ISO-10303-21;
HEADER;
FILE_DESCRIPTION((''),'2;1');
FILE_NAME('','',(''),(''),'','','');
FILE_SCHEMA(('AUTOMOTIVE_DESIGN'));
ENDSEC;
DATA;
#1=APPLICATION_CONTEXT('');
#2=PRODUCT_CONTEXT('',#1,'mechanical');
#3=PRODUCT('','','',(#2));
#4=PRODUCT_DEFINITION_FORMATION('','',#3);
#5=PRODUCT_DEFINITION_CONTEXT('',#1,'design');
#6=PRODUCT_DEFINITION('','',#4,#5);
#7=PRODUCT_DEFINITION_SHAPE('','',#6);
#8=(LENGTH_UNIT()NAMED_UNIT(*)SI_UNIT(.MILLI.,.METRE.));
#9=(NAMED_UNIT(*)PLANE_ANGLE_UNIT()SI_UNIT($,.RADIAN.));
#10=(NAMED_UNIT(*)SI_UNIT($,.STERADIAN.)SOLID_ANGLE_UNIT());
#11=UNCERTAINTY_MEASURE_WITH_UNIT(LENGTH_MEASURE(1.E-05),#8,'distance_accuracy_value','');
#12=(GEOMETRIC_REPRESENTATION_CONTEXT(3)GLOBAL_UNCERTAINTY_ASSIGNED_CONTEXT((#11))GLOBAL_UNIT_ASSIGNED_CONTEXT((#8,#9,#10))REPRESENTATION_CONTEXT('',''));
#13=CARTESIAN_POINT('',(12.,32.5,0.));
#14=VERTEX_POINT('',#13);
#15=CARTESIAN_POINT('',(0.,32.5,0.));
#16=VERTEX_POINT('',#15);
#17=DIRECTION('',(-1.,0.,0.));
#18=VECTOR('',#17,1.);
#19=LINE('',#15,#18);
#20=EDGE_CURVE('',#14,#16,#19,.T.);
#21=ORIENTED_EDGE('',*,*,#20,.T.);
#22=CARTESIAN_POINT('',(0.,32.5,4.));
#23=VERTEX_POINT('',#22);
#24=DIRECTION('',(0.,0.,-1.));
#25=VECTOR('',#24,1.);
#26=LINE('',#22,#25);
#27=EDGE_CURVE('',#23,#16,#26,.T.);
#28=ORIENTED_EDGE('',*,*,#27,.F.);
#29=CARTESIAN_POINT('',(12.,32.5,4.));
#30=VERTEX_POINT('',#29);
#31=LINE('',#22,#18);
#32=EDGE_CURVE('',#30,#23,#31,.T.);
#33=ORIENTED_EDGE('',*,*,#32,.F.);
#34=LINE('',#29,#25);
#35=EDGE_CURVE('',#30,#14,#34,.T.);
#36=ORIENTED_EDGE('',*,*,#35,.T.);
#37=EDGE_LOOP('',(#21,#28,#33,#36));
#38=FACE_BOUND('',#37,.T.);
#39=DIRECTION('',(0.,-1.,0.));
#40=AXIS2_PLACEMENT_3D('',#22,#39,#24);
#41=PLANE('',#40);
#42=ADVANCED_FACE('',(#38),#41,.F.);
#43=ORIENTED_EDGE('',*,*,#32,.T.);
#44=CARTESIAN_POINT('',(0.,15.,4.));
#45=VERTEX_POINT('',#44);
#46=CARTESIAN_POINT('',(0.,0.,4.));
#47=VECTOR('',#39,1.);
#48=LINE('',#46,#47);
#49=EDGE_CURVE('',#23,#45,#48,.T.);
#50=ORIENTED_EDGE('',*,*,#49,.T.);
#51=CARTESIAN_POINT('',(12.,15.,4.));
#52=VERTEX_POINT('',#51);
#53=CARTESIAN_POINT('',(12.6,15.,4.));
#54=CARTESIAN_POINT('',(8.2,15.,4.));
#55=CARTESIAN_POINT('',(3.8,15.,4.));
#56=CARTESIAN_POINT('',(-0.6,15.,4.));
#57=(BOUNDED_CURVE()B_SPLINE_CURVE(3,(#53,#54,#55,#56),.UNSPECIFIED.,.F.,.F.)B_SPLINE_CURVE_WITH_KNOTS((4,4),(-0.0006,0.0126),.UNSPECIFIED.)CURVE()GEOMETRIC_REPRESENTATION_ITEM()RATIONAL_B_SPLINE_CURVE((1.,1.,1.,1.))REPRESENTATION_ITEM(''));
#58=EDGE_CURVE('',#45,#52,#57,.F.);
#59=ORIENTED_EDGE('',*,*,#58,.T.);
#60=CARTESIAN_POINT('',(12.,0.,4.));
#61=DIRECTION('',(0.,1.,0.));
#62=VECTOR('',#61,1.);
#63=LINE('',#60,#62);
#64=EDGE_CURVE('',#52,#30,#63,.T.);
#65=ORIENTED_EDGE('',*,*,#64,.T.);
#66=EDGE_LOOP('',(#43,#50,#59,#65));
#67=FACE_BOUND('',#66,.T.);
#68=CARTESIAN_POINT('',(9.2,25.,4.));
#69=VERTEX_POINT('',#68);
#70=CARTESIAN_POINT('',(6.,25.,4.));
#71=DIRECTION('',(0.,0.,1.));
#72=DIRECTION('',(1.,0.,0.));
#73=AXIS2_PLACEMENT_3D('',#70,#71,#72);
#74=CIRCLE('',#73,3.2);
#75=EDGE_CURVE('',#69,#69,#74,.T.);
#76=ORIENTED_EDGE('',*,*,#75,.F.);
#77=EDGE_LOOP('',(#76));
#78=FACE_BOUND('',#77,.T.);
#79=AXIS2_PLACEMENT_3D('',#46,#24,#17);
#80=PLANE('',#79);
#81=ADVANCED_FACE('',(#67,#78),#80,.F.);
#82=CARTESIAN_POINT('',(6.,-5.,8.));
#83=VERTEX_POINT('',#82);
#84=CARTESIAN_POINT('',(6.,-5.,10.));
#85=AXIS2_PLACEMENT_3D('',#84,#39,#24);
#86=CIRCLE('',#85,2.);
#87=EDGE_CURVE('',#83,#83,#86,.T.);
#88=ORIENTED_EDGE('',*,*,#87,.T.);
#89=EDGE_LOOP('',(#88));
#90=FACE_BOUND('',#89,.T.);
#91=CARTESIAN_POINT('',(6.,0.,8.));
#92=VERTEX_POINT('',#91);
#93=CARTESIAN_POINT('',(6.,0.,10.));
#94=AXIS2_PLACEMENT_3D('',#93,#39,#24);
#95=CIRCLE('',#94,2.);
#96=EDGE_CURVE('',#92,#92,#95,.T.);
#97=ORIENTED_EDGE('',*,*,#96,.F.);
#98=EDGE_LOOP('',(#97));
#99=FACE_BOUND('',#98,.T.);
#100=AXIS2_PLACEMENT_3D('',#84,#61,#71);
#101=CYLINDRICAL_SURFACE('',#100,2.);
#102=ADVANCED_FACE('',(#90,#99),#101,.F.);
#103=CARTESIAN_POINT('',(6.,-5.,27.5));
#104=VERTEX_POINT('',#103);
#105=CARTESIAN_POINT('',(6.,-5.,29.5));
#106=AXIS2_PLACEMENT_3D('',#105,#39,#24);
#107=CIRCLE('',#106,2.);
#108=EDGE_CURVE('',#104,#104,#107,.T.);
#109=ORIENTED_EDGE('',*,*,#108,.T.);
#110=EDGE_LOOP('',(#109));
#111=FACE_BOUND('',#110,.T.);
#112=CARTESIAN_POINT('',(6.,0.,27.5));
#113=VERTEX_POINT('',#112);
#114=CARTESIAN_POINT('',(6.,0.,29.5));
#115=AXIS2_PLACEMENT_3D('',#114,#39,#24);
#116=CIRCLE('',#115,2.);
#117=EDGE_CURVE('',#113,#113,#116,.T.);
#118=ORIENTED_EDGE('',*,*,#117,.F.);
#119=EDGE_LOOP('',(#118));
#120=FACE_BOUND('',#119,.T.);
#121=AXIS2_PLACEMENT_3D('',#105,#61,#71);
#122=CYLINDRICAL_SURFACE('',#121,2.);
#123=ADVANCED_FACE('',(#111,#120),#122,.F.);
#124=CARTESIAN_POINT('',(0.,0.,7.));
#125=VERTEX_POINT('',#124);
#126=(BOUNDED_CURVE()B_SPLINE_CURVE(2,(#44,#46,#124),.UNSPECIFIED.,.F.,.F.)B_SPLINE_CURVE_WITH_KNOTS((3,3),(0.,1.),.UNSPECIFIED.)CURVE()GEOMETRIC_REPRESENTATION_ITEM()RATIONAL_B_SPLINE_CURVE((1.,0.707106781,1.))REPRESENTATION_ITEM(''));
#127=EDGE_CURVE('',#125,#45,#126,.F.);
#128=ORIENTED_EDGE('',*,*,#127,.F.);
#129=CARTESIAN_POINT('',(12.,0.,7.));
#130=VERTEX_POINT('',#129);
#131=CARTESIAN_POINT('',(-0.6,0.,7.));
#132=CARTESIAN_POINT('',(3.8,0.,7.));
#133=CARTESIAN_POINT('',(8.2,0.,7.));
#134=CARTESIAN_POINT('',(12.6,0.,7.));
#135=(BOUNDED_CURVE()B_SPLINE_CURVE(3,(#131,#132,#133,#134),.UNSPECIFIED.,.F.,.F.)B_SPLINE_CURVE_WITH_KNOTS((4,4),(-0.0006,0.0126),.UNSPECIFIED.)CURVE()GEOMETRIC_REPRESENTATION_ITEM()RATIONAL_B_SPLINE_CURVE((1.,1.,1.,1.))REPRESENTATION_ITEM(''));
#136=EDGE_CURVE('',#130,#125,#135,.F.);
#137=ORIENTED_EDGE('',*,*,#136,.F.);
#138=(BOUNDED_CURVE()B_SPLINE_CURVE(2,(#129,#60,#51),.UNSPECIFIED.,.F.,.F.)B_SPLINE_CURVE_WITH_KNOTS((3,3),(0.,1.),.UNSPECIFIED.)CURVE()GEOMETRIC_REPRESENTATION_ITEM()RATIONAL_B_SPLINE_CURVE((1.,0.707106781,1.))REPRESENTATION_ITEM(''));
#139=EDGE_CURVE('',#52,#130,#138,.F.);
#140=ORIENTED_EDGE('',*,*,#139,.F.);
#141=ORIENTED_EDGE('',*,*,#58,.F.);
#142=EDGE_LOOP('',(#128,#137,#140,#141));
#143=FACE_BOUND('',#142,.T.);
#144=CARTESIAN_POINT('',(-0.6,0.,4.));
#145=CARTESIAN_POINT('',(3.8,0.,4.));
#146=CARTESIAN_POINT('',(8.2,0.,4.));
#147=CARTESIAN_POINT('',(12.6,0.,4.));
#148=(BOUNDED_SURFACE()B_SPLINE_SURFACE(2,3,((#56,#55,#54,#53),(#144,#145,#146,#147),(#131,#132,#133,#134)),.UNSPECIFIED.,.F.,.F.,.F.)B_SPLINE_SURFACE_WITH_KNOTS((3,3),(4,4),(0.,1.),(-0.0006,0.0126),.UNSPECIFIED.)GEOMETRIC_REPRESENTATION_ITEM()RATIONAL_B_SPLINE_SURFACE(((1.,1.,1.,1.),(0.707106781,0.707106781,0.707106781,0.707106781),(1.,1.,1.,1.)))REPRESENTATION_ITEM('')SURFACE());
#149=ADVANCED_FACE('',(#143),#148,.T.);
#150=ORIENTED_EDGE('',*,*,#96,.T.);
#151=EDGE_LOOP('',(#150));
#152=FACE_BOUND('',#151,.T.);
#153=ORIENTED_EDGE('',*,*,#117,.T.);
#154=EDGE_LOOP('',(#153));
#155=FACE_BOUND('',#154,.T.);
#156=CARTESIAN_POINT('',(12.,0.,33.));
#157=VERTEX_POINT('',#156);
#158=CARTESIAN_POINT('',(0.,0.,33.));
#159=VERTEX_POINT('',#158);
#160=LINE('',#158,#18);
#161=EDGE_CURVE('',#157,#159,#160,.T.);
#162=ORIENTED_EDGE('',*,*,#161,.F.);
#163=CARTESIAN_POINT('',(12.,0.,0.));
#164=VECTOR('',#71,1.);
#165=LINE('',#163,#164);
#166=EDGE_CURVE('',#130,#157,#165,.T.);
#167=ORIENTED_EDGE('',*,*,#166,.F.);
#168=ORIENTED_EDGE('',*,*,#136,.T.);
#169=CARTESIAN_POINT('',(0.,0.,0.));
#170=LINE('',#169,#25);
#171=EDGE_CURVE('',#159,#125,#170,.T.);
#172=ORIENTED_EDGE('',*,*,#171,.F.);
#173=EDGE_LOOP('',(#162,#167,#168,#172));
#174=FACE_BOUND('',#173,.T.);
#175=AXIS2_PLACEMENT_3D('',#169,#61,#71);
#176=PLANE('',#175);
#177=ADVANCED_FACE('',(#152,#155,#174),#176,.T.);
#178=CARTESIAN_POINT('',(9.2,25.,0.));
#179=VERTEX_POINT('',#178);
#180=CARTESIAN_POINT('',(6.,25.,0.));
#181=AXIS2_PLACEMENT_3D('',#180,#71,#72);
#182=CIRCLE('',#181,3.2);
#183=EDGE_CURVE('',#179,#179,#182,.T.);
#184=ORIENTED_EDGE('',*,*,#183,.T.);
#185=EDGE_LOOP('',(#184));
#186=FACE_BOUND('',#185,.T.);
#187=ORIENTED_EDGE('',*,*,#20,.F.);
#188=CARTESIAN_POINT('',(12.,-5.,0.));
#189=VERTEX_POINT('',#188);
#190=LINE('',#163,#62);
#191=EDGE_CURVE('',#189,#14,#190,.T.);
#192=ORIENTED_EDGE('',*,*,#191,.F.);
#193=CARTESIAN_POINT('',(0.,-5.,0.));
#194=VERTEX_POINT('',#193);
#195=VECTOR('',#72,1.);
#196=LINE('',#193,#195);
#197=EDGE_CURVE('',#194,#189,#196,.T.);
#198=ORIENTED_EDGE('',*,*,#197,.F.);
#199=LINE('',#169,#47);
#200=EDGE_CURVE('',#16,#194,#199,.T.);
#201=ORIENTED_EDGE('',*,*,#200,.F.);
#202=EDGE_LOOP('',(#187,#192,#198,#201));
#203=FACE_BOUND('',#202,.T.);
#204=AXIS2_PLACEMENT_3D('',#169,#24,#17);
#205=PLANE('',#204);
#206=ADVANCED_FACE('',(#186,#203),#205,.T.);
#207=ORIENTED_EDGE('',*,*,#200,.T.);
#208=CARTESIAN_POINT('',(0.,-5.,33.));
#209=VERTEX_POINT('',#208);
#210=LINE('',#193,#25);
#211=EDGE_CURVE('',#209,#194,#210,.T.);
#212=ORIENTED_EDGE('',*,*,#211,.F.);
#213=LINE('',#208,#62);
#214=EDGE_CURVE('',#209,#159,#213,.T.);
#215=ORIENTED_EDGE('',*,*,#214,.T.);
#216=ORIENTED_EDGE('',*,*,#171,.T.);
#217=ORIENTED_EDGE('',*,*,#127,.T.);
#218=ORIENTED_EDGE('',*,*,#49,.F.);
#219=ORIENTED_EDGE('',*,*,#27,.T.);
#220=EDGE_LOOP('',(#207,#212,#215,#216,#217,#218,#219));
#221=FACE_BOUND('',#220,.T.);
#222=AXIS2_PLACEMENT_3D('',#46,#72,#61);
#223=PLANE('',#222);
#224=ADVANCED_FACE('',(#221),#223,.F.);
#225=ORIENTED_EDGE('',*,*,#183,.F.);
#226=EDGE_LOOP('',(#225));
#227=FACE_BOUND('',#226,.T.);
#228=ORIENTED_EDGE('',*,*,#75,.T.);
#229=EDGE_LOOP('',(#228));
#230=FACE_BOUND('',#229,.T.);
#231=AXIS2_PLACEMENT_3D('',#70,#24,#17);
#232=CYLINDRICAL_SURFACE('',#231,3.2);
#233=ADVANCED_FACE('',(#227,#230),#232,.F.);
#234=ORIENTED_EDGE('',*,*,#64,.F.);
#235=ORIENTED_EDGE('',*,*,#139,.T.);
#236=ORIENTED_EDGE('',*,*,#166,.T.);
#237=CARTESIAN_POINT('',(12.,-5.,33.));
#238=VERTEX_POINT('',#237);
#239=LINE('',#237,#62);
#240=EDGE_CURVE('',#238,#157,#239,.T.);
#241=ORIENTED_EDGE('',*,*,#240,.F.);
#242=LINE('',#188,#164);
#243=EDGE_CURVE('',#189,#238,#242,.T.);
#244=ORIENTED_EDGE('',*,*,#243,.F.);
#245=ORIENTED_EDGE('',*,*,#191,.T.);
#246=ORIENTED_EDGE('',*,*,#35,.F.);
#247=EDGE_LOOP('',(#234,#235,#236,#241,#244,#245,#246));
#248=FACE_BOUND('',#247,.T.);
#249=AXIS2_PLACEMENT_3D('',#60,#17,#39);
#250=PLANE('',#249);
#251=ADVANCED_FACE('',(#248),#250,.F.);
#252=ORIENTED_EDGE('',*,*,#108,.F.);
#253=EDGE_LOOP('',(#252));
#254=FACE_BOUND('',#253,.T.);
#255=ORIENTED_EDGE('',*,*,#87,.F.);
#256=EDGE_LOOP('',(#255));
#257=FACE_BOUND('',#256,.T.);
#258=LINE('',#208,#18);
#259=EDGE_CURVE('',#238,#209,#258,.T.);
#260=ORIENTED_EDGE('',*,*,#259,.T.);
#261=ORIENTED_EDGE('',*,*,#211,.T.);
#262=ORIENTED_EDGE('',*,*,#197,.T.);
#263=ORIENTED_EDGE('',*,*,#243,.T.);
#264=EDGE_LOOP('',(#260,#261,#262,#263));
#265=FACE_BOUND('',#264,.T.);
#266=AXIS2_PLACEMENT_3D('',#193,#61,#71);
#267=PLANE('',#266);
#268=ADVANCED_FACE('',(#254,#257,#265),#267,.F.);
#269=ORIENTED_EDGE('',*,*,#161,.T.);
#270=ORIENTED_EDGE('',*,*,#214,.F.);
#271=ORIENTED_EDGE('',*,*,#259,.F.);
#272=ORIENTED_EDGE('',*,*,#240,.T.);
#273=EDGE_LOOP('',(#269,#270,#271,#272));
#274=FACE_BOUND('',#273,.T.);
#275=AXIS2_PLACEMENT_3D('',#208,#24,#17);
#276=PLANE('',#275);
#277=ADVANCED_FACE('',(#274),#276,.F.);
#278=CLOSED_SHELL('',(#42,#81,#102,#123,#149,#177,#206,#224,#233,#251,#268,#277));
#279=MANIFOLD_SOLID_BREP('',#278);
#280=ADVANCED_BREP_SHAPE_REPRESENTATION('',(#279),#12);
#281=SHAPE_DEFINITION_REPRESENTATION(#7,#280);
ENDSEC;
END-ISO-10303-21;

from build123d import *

# Parameters (mm, degrees)
SKETCH1_W           = 12
SKETCH1_H           = 32.5
SKETCH1_R           = 3.2
BOSS_EXTRUDE1_DEPTH = 4
SKETCH2_W           = 12
SKETCH2_H           = 33
SKETCH2_R           = 2
BOSS_EXTRUDE2_DEPTH = 5
FILLET1_SIZE        = 15
FILLET1_SIZE_2      = 3


with BuildPart() as part:
    # Sketch1 → Boss-Extrude1 (new body)
    with BuildSketch(Plane.XY):
        with Locations((6, 16.25)):
            Rectangle(SKETCH1_W, SKETCH1_H)
        with Locations((6, 25)):
            Circle(SKETCH1_R, mode=Mode.SUBTRACT)
    extrude(amount=BOSS_EXTRUDE1_DEPTH)

    # Sketch2 → Boss-Extrude2 (add)
    with BuildSketch(Plane.XZ):
        with Locations((6, 16.5)):
            Rectangle(SKETCH2_W, SKETCH2_H)
        with Locations(Location((6, 10, 0), (0, 0, 270))):
            Circle(SKETCH2_R, mode=Mode.SUBTRACT)
        with Locations(Location((6, 29.5, 0), (0, 0, 270))):
            Circle(SKETCH2_R, mode=Mode.SUBTRACT)
    extrude(amount=BOSS_EXTRUDE2_DEPTH)

    # Fillet1
    # an asymmetric fillet: 15, 3 mm, written as the material it adds along each edge
    with BuildSketch(Plane(origin=(0, 0, 4), x_dir=(0, 1, 0), z_dir=(1, 0, 0))) as fillet1_piece_1:
        with BuildLine():
            Bezier((FILLET1_SIZE, 0), (0, 0), (0, FILLET1_SIZE_2), weights=[1, 0.707106781, 1])
            Line((0, FILLET1_SIZE_2), (0, 0))
            Line((0, 0), (FILLET1_SIZE, 0))
        make_face()
    extrude(amount=12)


solid = part.part
